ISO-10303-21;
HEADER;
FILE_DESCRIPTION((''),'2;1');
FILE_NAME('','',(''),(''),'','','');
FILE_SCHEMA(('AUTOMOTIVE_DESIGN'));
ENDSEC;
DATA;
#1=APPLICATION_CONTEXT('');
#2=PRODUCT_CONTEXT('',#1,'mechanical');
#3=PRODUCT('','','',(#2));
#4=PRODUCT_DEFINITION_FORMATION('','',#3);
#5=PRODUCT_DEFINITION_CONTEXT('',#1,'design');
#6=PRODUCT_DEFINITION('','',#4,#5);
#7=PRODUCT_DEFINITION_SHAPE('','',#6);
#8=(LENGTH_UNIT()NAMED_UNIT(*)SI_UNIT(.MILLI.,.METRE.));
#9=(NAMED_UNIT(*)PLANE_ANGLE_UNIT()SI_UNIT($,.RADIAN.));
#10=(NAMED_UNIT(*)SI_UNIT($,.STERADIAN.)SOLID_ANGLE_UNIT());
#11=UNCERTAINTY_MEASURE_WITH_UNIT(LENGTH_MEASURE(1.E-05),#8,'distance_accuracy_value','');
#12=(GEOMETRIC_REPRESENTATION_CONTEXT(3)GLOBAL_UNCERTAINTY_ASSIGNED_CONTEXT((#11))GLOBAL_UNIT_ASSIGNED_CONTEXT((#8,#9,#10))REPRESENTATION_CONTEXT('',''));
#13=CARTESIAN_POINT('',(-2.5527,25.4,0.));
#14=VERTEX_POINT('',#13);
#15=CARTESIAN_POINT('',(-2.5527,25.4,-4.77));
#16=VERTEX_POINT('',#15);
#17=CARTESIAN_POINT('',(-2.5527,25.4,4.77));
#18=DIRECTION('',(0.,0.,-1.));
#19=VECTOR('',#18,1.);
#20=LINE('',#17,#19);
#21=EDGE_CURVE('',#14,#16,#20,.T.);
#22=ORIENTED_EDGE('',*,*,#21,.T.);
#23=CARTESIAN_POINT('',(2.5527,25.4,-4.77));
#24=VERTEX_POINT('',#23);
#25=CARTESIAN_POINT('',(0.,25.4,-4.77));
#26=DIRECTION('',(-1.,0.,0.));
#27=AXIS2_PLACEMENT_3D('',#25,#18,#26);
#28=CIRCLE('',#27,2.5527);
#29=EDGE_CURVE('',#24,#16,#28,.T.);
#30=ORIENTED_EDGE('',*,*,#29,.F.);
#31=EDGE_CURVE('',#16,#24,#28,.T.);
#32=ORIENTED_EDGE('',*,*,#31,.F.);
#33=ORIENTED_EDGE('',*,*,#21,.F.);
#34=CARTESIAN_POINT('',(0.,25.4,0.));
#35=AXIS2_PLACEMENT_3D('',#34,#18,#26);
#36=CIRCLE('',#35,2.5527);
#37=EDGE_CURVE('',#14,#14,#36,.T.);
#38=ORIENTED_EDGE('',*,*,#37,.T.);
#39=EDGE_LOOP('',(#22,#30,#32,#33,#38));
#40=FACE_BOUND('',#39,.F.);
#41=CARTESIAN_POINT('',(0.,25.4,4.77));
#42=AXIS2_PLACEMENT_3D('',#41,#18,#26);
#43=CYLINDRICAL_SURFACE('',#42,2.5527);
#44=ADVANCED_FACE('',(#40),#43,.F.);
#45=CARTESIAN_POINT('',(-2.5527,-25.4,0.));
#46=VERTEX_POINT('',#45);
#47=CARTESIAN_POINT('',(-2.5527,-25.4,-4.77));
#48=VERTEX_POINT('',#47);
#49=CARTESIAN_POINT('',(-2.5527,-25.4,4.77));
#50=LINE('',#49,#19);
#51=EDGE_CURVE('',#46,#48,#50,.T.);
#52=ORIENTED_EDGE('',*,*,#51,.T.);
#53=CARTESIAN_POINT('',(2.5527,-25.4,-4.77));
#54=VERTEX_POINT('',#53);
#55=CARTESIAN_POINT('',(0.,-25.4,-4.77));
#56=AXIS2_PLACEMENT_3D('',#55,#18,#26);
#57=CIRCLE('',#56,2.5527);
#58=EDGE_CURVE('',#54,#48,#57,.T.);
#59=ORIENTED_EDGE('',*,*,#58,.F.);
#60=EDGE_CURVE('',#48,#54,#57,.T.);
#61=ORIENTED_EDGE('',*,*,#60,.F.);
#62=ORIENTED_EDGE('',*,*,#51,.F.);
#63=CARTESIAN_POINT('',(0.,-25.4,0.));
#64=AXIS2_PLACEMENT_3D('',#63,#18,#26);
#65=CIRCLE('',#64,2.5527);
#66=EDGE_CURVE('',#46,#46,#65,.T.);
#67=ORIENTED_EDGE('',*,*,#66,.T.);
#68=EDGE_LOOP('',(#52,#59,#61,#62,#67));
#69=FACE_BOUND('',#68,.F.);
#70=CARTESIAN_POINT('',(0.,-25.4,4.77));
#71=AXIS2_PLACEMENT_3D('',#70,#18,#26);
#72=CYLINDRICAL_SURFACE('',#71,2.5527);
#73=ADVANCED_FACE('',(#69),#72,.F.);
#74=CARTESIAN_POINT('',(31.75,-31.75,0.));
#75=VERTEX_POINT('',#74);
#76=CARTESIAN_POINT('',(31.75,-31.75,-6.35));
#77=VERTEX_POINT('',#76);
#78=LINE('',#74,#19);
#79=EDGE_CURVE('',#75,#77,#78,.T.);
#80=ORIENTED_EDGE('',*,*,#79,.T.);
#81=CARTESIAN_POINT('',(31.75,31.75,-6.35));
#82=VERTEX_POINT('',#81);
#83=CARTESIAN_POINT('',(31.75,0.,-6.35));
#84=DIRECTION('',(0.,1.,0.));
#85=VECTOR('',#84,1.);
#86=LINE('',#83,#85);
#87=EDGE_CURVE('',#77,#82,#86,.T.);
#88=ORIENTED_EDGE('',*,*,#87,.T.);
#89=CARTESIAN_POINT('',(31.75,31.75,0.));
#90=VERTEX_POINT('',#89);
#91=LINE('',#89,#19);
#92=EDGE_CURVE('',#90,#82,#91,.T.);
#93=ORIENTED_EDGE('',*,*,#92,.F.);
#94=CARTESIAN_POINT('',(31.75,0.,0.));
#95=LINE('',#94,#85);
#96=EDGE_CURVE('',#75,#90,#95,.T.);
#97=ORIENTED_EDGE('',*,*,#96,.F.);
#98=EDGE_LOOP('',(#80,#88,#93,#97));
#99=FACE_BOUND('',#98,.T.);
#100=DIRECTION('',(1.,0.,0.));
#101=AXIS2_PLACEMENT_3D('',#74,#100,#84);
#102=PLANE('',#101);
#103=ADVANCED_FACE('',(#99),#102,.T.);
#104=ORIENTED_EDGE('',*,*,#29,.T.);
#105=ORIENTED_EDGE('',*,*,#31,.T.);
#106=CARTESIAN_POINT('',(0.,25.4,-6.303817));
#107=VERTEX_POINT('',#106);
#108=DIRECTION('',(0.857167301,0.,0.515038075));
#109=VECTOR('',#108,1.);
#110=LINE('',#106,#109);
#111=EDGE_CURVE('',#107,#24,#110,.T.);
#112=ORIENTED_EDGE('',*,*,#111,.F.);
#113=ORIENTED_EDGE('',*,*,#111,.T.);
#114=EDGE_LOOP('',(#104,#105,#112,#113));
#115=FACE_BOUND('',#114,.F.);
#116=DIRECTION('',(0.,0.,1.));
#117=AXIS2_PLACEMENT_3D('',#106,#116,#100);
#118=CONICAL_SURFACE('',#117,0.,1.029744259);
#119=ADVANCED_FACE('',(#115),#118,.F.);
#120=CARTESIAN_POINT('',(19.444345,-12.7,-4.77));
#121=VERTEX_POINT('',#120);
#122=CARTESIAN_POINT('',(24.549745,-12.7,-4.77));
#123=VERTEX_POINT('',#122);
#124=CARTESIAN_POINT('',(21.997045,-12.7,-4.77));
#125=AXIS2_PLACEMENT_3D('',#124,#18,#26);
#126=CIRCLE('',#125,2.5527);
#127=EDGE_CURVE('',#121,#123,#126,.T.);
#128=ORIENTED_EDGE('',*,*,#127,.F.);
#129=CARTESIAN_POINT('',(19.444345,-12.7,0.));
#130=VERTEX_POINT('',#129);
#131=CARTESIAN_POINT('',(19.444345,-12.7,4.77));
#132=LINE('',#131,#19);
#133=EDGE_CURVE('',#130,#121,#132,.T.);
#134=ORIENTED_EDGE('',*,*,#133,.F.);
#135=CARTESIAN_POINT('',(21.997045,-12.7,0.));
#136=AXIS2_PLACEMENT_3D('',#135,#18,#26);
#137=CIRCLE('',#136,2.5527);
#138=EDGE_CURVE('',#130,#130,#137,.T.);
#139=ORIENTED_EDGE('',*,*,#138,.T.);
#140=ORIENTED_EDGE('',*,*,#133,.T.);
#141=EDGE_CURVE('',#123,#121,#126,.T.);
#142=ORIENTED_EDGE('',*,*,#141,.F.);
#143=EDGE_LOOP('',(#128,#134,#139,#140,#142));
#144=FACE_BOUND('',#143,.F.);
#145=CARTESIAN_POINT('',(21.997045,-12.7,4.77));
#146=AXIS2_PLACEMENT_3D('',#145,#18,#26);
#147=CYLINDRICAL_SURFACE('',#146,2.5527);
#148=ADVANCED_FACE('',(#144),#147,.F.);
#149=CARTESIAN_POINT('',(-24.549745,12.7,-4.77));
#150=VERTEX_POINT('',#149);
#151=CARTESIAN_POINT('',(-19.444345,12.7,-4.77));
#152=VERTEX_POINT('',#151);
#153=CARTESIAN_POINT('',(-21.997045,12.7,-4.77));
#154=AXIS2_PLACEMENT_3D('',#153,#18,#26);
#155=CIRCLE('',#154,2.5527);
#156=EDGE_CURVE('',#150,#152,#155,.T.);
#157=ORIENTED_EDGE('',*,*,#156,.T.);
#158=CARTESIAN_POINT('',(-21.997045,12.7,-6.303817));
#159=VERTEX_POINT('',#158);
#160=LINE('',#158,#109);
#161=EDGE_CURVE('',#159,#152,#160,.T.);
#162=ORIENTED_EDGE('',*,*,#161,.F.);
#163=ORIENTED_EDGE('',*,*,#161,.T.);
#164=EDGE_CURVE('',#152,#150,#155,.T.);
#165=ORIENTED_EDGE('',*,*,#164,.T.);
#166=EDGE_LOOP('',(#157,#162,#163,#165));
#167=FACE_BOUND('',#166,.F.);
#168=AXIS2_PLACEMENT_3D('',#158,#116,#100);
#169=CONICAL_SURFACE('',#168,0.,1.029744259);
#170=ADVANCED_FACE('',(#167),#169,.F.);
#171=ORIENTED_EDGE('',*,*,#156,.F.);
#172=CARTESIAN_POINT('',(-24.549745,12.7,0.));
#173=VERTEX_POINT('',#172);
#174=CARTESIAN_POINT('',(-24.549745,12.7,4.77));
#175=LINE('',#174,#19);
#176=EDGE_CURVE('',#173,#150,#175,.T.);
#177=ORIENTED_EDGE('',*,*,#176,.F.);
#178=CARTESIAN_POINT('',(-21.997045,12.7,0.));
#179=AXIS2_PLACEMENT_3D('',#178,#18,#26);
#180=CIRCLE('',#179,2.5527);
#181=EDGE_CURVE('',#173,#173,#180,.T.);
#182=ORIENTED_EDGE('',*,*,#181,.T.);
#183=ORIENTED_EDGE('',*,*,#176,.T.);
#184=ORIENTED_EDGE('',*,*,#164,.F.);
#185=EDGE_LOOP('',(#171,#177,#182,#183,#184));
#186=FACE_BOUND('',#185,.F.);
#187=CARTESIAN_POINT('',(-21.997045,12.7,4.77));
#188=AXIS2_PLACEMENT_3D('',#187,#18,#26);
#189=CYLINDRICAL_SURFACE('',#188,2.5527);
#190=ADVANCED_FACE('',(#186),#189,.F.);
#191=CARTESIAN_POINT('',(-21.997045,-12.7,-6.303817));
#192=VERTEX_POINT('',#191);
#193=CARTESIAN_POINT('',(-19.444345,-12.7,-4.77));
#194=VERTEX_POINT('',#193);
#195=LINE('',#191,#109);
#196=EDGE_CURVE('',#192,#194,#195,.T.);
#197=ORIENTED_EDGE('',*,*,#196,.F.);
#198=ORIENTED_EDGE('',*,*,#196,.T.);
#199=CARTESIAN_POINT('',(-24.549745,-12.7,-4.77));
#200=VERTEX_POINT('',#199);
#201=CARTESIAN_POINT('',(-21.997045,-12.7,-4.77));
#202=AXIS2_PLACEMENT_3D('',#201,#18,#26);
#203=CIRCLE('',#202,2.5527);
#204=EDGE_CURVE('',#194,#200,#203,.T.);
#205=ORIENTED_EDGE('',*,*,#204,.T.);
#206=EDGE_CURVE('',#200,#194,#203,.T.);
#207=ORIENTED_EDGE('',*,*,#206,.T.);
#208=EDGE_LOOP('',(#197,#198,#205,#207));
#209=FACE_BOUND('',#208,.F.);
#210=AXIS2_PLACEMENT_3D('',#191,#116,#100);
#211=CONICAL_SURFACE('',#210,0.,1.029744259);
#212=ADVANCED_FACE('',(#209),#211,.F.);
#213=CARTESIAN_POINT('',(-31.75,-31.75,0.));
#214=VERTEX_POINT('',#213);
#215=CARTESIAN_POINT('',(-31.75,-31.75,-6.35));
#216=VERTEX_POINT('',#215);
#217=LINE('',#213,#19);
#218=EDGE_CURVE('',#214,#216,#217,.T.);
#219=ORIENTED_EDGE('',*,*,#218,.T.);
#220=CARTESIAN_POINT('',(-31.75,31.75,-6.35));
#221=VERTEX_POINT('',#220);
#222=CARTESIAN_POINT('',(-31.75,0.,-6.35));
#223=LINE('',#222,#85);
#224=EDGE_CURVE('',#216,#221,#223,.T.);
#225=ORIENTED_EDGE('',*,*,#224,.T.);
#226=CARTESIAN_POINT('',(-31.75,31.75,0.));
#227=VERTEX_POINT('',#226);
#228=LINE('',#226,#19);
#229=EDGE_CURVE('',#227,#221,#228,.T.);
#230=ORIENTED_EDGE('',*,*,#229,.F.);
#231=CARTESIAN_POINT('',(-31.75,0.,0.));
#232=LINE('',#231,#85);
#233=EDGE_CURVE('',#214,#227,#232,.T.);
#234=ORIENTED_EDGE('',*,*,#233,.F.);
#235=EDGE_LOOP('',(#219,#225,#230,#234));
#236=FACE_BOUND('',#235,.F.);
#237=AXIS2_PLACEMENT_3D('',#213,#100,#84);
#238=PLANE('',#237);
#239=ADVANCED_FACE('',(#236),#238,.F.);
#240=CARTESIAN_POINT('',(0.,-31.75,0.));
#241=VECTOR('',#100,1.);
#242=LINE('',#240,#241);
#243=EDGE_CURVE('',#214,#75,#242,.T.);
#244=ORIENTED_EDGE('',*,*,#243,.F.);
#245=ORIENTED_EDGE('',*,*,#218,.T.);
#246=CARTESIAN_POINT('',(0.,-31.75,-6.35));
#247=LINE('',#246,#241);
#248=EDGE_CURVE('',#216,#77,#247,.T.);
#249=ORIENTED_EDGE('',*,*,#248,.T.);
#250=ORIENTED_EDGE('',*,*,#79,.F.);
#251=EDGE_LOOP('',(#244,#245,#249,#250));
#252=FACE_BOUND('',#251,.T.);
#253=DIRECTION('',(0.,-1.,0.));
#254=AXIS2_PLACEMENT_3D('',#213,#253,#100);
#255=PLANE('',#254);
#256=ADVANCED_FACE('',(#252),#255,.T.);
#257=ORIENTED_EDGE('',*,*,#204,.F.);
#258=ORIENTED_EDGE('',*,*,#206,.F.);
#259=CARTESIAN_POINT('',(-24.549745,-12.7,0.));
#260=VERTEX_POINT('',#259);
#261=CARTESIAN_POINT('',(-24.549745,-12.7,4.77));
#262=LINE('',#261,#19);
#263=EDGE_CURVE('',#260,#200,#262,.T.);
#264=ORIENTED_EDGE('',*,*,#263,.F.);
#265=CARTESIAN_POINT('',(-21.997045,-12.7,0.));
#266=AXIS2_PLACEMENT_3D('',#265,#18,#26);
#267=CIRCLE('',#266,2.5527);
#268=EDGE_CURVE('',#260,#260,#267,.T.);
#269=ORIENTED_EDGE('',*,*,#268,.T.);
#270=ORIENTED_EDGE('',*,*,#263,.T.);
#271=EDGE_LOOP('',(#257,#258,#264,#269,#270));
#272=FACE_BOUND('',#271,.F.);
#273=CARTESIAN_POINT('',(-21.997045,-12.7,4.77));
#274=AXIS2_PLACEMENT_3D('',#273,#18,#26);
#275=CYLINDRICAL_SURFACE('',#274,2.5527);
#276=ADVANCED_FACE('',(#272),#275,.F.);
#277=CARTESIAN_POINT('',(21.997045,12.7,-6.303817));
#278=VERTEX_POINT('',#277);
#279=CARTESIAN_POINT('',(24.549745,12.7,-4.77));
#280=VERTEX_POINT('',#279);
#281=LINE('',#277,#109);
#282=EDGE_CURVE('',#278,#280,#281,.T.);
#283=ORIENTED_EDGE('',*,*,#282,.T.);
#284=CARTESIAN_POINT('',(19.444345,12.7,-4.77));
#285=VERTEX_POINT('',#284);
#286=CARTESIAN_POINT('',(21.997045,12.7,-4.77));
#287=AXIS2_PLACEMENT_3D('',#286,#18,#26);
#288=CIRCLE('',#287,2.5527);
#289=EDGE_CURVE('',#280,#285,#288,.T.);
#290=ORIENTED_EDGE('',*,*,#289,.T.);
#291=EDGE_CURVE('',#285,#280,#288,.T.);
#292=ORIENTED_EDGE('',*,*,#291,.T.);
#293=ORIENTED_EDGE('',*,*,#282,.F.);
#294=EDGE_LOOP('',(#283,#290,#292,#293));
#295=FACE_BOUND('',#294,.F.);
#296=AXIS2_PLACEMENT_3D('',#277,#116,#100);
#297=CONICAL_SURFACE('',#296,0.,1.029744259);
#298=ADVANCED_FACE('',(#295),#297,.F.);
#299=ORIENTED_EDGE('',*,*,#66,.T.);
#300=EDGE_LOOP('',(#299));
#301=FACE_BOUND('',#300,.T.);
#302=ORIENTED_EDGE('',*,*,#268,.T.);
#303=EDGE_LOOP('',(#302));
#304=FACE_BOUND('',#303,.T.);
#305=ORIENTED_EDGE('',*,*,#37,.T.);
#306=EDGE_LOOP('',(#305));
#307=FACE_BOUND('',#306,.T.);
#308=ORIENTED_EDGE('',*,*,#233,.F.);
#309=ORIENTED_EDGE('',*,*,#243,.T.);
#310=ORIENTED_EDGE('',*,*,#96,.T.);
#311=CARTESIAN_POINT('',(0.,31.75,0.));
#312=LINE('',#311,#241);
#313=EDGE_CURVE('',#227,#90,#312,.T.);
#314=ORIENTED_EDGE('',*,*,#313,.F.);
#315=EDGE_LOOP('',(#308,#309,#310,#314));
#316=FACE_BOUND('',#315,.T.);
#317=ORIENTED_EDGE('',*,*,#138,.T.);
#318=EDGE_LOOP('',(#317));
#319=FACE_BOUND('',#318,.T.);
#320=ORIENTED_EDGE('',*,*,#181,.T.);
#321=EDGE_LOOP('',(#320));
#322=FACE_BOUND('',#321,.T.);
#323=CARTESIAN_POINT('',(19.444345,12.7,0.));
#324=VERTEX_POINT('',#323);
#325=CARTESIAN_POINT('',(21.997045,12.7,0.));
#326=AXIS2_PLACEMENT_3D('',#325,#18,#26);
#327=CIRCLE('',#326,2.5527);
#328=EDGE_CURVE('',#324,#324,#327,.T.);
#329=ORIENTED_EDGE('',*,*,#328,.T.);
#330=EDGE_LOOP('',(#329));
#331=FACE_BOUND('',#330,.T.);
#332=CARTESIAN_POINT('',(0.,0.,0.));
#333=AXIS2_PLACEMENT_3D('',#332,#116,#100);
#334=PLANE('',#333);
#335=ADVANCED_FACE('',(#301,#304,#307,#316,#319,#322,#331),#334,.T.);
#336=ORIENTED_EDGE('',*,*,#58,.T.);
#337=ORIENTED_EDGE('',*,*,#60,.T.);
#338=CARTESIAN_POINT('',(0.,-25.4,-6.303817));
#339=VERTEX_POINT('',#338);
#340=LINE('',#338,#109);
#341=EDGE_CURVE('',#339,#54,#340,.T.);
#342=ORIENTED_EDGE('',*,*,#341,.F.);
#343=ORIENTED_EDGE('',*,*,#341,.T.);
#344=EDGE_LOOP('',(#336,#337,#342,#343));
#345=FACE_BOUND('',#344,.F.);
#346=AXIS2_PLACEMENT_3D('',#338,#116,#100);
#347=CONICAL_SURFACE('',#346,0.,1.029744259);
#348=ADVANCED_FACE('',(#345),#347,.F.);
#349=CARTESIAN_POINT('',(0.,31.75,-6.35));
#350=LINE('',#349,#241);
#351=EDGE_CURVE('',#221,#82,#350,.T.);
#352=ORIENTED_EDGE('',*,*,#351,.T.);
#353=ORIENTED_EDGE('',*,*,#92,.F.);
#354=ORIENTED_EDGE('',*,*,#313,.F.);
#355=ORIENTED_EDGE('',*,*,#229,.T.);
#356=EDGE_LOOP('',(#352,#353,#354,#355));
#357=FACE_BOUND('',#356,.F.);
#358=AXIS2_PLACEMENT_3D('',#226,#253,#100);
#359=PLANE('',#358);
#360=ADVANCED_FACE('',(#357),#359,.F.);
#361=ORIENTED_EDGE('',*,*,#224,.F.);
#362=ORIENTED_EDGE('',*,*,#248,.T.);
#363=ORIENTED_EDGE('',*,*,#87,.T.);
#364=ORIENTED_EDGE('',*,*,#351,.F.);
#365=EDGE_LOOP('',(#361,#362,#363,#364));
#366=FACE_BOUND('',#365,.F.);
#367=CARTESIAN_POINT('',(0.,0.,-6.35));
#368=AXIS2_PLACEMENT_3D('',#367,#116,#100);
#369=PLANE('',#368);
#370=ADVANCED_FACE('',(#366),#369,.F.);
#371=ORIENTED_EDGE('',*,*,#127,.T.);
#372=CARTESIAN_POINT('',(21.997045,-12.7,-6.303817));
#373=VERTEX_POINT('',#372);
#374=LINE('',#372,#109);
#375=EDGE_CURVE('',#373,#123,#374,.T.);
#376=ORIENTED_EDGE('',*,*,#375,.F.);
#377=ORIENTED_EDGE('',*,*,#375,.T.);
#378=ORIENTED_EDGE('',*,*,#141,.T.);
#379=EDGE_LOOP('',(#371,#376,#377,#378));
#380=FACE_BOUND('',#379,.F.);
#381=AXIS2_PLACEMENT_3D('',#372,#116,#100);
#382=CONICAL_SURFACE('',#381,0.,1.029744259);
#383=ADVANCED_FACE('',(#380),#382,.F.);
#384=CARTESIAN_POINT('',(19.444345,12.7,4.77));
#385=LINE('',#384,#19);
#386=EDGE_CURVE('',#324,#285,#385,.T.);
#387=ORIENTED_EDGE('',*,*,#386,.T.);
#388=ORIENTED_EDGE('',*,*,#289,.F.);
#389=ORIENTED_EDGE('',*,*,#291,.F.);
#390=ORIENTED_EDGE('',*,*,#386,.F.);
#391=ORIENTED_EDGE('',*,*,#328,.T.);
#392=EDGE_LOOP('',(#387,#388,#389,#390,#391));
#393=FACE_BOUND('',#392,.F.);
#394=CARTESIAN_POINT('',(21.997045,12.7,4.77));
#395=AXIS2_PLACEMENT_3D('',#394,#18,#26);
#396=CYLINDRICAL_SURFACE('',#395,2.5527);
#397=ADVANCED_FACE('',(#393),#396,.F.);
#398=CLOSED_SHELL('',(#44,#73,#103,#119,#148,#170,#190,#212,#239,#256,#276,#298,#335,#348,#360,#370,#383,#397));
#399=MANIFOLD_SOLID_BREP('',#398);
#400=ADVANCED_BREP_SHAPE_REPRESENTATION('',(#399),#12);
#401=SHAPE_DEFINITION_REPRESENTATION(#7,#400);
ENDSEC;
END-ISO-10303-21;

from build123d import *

# Parameters (mm, degrees)
F0_W     = 63.5
F0_H     = 63.5
F1_DEPTH = 6.35
F2_D     = 5.1054
F2_DEPTH = 4.77
F2_TIP   = 1.5338169022


# Not quite as in the source:
# - a length typed as a fraction of an inch, garbled in the dataset ("3 / 203.2 mm" for 3/8 in), is restored


with BuildPart() as f1:
    # F0 (on Top) → F1 (new body)
    with BuildSketch(Plane.XY):
        Rectangle(F0_W, F0_H)
    extrude(amount=-F1_DEPTH)

    # F2
    with Locations(Plane.XY):
        with Locations((0, -25.4), (21.9970452561, -12.7), (21.9970452561, 12.7), (0, 25.4), (-21.9970452561, -12.7), (-21.9970452561, 12.7)):
            Hole(F2_D / 2, depth=F2_DEPTH)
            with Locations((0, 0, -(F2_DEPTH + F2_TIP / 2))):  # 118° drill point
                Cone(0, F2_D / 2, F2_TIP, mode=Mode.SUBTRACT)


solid = f1.part
